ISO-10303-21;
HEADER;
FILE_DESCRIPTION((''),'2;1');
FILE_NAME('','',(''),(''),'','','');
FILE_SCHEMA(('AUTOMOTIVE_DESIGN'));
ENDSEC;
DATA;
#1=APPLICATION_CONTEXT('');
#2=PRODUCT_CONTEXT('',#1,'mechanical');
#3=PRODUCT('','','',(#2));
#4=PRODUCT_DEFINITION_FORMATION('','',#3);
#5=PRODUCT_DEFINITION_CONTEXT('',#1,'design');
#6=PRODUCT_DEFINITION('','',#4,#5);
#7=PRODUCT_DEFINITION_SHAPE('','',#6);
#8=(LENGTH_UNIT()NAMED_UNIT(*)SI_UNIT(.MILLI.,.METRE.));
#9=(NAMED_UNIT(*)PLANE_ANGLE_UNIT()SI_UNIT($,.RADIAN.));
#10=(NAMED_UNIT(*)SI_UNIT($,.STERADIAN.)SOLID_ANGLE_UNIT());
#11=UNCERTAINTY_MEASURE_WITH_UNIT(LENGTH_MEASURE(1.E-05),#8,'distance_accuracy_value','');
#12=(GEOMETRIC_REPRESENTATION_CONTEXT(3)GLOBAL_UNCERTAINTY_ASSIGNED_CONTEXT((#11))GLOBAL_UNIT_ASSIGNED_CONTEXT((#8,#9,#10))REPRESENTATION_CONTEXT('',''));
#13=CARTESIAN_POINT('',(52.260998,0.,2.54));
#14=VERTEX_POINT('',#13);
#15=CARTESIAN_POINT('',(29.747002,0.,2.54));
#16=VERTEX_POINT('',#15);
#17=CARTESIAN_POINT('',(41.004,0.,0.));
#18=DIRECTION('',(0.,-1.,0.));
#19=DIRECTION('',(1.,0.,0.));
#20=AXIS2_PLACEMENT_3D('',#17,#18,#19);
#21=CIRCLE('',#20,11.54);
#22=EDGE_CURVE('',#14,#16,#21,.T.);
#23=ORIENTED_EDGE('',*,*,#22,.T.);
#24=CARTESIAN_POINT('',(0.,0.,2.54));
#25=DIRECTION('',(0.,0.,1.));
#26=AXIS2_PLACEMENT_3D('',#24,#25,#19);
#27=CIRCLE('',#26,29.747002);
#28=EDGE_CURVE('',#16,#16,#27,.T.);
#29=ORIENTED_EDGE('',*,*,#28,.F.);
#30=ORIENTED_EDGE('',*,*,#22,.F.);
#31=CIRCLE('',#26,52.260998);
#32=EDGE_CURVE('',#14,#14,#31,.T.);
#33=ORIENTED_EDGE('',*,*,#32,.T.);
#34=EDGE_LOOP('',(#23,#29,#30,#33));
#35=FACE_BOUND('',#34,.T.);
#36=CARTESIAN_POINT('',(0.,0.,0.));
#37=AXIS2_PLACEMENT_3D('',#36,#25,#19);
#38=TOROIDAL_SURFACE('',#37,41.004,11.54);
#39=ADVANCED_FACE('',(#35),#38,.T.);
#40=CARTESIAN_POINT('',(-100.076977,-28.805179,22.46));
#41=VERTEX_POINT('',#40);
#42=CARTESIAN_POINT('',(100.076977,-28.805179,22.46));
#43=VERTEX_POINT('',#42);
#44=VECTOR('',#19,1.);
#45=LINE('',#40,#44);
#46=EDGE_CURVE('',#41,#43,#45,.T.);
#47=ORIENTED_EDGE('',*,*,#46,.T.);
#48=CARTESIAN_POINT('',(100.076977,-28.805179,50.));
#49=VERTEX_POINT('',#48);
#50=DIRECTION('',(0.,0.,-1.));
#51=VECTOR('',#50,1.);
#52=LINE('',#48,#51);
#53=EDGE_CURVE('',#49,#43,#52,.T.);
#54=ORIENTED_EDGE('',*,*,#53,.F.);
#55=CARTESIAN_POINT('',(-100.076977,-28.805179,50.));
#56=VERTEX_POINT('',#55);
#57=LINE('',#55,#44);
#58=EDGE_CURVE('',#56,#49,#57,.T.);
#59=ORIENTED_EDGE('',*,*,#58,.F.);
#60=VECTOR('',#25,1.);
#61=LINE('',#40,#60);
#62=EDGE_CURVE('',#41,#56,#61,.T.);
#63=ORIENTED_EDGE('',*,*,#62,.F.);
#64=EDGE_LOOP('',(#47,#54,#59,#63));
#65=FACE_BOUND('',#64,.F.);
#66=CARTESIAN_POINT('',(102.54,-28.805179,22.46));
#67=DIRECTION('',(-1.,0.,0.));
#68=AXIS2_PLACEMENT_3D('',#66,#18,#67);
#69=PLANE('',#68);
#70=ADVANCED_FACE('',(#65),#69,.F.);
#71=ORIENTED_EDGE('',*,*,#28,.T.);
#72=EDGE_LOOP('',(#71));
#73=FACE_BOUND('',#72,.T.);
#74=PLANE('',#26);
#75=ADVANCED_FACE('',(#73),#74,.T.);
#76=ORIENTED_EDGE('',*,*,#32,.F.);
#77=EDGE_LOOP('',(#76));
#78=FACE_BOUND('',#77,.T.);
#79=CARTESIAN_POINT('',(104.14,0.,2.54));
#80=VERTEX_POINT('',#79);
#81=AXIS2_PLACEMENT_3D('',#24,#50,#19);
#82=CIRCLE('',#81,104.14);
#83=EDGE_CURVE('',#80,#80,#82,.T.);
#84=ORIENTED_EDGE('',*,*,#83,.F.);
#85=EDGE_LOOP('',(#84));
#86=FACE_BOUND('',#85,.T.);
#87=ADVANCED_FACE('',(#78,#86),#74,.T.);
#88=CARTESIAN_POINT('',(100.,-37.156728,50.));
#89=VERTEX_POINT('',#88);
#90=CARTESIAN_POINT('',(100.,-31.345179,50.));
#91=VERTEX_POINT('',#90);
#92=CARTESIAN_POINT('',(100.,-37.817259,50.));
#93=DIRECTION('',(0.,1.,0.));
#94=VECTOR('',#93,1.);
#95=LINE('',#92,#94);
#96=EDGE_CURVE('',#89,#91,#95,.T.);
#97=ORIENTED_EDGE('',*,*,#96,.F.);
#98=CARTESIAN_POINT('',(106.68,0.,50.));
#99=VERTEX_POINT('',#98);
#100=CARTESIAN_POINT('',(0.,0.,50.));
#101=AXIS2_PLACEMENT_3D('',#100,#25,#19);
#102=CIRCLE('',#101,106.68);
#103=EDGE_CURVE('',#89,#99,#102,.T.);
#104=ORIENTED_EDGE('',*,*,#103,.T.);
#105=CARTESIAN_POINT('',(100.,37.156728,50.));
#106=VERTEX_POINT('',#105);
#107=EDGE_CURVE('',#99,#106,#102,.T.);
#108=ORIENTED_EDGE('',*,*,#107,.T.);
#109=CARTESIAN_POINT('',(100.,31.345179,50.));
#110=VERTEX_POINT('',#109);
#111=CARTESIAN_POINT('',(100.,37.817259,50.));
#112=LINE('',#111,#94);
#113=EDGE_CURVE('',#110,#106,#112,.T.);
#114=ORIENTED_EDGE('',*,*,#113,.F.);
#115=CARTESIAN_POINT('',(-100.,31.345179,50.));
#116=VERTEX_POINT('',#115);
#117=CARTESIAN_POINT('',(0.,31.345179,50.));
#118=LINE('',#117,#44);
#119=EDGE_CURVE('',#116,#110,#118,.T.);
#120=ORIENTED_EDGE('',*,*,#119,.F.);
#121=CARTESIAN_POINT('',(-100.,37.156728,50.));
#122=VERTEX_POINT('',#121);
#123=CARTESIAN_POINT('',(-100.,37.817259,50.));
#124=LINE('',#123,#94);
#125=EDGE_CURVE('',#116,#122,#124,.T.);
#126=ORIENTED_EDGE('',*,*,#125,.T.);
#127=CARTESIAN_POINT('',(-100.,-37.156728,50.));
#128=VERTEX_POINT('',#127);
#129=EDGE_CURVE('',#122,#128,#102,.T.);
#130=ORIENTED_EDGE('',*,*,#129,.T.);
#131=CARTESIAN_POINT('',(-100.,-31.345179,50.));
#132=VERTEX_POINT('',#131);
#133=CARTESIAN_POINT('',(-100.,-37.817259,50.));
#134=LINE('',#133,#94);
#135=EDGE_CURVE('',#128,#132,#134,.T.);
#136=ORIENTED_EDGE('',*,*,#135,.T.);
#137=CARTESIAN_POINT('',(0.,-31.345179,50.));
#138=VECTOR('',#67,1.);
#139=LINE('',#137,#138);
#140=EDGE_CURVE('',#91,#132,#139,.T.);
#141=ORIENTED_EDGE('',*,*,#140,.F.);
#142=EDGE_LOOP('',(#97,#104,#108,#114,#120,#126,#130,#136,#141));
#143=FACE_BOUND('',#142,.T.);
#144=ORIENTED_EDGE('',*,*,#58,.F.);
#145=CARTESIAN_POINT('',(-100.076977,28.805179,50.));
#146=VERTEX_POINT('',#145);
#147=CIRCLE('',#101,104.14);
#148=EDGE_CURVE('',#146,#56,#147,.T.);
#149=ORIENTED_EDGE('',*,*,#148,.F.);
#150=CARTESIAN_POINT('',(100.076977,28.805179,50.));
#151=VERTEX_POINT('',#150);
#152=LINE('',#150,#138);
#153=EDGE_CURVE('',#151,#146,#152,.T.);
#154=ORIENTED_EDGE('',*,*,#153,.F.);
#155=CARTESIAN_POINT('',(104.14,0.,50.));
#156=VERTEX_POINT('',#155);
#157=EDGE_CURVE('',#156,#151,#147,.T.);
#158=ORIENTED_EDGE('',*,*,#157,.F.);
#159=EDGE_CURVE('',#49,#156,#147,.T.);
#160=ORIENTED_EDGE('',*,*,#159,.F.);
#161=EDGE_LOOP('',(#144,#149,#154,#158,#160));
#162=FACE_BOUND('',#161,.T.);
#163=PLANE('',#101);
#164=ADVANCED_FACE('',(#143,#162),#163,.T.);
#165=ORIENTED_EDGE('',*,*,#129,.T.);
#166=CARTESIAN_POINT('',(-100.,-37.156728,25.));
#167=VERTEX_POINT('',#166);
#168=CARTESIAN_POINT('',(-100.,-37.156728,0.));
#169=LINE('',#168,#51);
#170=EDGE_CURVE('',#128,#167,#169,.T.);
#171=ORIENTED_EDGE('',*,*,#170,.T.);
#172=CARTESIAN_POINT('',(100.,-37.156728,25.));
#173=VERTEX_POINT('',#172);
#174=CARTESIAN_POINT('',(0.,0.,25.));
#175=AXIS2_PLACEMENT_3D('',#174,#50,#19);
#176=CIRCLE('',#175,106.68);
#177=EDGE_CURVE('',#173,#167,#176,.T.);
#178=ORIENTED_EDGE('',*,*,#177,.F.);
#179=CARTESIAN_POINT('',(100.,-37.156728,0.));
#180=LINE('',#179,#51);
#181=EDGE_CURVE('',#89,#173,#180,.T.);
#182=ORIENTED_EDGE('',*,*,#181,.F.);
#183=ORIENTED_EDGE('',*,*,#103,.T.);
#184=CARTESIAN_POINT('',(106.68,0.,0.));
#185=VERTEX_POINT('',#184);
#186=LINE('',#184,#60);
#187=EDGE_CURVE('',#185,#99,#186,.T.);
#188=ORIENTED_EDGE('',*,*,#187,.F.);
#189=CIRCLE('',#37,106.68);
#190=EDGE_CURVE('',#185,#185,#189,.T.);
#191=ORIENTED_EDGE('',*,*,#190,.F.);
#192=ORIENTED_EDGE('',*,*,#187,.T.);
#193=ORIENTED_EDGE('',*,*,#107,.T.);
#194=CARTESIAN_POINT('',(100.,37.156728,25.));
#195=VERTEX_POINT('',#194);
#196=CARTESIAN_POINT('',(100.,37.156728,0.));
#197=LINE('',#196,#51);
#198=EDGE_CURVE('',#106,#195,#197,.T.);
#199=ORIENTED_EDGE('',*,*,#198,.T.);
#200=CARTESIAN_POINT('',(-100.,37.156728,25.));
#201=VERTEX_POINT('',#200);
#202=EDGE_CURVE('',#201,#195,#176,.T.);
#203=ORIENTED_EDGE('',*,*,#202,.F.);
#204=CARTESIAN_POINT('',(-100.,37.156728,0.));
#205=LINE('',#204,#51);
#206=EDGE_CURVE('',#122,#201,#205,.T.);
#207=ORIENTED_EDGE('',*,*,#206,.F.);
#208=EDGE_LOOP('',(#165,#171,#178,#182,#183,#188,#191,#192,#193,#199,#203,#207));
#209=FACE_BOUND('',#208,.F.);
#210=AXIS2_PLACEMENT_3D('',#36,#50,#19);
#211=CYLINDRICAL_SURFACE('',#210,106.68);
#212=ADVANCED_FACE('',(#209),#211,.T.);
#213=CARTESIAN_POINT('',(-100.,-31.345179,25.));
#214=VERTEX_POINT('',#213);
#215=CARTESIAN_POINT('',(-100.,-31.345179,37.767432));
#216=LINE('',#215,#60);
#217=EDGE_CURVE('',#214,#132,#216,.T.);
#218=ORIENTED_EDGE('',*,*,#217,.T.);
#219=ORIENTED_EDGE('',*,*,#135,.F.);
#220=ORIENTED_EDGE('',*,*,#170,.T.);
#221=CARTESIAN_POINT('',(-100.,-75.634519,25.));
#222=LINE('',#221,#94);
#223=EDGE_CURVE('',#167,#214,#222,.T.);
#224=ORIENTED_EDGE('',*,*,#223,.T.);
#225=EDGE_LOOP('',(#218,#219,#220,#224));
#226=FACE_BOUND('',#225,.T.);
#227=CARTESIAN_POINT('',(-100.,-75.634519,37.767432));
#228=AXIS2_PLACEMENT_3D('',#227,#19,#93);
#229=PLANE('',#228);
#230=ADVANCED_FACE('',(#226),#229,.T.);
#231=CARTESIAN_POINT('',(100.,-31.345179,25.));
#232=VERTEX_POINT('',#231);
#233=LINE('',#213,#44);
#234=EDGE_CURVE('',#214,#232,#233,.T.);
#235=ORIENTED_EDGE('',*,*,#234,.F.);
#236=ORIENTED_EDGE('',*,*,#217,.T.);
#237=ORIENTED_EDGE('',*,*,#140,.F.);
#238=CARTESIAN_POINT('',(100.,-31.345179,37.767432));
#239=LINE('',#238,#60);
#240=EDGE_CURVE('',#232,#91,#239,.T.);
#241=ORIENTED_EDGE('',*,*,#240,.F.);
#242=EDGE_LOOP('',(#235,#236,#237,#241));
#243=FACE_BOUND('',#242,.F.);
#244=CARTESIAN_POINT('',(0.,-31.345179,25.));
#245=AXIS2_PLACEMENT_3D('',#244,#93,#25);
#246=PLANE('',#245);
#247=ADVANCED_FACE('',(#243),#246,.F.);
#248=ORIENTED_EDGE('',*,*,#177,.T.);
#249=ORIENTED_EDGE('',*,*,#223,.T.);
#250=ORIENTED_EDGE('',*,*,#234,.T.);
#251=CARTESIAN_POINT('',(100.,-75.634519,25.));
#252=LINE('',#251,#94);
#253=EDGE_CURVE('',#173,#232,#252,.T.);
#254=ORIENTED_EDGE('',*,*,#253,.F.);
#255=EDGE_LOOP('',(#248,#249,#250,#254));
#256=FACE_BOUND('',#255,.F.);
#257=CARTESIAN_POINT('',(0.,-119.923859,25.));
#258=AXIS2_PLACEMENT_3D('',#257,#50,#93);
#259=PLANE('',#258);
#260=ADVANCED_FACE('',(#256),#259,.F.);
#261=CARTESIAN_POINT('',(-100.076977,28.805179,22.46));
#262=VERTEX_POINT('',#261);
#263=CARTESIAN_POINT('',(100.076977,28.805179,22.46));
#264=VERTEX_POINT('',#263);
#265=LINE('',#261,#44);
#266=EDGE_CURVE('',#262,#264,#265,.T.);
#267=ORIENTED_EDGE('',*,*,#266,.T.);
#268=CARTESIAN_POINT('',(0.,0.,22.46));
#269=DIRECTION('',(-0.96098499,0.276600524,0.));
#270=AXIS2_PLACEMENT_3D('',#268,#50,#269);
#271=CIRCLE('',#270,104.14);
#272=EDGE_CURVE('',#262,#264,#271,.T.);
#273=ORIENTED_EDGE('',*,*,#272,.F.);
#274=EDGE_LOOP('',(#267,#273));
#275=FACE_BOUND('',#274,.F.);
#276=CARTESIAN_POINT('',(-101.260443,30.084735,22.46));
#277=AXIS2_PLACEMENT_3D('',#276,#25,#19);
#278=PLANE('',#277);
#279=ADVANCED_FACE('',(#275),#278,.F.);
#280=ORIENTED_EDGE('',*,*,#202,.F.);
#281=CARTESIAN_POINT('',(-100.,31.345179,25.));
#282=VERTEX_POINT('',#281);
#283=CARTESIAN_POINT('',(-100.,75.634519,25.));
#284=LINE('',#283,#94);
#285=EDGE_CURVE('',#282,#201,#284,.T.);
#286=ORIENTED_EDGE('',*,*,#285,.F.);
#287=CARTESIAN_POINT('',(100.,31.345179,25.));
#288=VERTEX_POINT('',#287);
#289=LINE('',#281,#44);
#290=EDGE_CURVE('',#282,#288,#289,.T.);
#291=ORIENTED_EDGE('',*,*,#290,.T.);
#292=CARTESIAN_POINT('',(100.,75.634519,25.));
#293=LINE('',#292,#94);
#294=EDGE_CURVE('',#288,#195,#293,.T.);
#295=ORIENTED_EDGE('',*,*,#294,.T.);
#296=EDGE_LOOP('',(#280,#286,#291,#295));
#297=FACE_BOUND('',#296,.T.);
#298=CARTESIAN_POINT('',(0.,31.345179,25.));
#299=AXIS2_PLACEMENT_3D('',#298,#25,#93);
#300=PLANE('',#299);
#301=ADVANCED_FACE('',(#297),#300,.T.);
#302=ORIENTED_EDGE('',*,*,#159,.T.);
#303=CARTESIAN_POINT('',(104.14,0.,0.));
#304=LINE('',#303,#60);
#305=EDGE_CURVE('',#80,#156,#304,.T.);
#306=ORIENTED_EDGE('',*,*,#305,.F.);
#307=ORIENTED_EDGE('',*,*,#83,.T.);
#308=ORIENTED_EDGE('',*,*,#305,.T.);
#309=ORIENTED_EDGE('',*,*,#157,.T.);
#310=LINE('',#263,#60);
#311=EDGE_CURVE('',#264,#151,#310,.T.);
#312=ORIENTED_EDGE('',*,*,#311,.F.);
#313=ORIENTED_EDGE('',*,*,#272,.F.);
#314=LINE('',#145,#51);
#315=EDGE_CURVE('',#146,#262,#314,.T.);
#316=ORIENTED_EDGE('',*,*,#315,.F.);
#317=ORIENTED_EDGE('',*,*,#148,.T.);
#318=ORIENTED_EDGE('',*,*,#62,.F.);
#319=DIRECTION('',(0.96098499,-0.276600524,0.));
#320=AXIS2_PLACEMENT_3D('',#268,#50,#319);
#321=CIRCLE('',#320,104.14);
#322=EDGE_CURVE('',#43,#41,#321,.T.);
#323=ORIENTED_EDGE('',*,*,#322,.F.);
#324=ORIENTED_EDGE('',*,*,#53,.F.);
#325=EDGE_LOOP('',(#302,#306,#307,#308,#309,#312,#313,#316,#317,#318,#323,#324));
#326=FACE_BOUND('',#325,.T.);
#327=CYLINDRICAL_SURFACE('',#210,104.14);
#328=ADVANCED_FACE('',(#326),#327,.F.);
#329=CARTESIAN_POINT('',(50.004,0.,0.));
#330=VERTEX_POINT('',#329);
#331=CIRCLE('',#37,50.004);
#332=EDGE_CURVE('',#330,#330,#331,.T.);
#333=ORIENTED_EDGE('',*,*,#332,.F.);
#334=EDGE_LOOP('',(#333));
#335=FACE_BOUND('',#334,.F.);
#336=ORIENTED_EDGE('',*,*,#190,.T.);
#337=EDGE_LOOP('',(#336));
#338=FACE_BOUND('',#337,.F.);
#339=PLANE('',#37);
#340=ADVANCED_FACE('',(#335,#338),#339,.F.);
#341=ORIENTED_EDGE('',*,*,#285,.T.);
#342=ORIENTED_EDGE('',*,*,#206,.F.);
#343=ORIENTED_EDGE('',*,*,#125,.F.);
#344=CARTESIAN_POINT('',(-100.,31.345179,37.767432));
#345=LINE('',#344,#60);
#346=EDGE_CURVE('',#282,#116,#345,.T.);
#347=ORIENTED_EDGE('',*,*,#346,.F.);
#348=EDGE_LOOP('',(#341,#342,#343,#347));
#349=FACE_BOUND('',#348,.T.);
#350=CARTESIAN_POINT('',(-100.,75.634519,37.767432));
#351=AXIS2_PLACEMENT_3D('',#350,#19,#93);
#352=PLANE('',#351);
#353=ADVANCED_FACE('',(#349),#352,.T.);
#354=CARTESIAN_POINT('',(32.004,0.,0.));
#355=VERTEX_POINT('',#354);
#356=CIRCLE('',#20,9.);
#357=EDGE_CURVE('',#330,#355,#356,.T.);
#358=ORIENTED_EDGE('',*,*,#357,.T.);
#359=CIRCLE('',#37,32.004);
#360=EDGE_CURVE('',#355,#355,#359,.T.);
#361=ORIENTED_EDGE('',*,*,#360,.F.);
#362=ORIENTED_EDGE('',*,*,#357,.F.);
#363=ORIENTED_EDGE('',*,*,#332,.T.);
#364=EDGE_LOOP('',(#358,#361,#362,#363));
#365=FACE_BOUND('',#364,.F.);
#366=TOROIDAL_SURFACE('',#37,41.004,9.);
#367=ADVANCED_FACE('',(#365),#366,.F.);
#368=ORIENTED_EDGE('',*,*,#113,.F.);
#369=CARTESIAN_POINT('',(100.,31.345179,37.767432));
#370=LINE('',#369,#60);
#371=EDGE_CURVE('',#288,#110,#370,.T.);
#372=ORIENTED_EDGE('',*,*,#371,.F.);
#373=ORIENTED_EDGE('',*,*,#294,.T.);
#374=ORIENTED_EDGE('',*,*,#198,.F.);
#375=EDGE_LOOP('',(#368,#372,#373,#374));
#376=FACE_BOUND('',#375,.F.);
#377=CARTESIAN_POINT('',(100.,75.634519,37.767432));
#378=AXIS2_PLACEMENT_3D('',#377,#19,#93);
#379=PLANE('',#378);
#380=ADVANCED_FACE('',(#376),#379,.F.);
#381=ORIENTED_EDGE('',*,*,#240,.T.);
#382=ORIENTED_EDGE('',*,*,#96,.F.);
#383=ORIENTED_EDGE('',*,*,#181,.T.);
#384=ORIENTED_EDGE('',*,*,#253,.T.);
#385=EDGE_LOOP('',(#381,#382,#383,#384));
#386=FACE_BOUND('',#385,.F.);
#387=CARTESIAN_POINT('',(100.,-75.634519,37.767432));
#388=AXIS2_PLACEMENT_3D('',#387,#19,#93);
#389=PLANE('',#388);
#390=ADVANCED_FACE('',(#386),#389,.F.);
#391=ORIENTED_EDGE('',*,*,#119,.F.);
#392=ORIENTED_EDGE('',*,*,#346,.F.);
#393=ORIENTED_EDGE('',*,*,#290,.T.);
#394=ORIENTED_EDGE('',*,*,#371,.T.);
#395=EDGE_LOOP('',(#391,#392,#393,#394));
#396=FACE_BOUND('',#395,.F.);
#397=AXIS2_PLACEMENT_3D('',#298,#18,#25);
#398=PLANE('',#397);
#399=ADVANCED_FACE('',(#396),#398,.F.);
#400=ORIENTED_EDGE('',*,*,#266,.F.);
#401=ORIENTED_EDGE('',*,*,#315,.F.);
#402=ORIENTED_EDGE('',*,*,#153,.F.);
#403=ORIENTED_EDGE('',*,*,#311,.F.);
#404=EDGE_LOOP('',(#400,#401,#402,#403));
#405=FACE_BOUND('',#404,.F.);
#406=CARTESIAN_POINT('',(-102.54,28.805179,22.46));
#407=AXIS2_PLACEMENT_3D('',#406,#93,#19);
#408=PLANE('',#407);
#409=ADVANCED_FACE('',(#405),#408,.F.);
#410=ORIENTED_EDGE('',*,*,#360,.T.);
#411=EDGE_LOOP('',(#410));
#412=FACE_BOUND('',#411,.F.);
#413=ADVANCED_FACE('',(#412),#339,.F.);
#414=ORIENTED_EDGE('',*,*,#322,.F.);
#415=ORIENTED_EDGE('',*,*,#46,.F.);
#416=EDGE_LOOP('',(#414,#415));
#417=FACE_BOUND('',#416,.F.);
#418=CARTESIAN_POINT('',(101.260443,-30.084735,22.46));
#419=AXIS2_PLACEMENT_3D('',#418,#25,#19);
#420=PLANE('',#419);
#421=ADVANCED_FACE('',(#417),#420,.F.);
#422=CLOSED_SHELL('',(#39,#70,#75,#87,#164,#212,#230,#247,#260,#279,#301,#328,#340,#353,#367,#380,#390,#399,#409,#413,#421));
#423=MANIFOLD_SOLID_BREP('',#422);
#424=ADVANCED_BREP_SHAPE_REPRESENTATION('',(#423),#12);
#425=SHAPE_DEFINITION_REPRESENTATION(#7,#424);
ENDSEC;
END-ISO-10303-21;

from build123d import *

# Parameters (mm, degrees)
F0_R        = 106.68
F1_DEPTH    = 50
F2_R        = 9
F4_W        = 88.5786805532
F4_H        = 25.534863025
F5_DEPTH    = 100
F6_T        = 2.54
F6_T3_DEPTH = 30.08
F6_T5_DEPTH = 10.8915489546
F6_T7_DEPTH = 205.08
F6_T9_DEPTH = 10.8915489546


# Not quite as in the source:
# - a shell that OpenCascade refuses in one call is made with other operations: the cavity is built on its own and cut out


with BuildPart() as f1:
    # F0 (on Top) → F1 (new body)
    with BuildSketch(Plane.XY):
        Circle(F0_R)
    extrude(amount=F1_DEPTH)

    # F2 (on Front) → F3 (revolve, cut)
    with BuildSketch(Plane.XZ):
        with Locations((41.004, 0)):
            Circle(F2_R)
    revolve(axis=Axis((0, 0, 20.5781124532), (0, 0, 1)), mode=Mode.SUBTRACT)

    # F4 (on Right) → F5 (cut, symmetric)
    with BuildSketch(Plane.YZ):
        with Locations((75.6345188421, 37.7674315125)):
            Rectangle(F4_W, F4_H)
        with Locations((-75.6345188421, 37.7674315125)):
            Rectangle(F4_W, F4_H)
    extrude(amount=F5_DEPTH, both=True, mode=Mode.SUBTRACT)

    # F6: shell of thickness 2.54, made by hand


with BuildPart() as f6_core1:
    # F6_t2: copy of F1
    add(f1.part)

    # the walls: a layer under each face that stays
    f6_faces = [f6_core1.faces().sort_by_distance(p)[0] for p in [
        (-106.68, 0, 25),
        (-71.12, -71.12, 0),
        (100, -34.2509530428, 37.5),
        (0, -69.0125892827, 25),
        (-100, -34.2509530428, 37.5),
        (-100, 34.2509530428, 37.5),
        (0, 69.0125892827, 25),
        (100, 34.2509530428, 37.5),
        (-41.004, 0, 9),
        (0, -31.3451785655, 37.5),
        (0, 31.3451785655, 37.5),
        (0, 0, 0),
    ]]
    thicken(f6_faces, amount=-F6_T, mode=Mode.SUBTRACT)

    # F6_s4 → F6_t3 (cut)
    with BuildSketch(Plane.XY.offset(22.46)):
        Polygon((99.9746, -31.3705785655), (102.54, -31.3451785655), (102.54, -28.8051785655), (100, -28.8051785655), align=None)
        Polygon((-99.9746, -31.3705785655), (-102.54, -31.3451785655), (-102.54, -28.8051785655), (-100, -28.8051785655), align=None)
        Polygon((-99.9746, 31.3705785655), (-102.54, 31.3451785655), (-102.54, 28.8051785655), (-100, 28.8051785655), align=None)
        Polygon((99.9746, 31.3705785655), (102.54, 31.3451785655), (102.54, 28.8051785655), (100, 28.8051785655), align=None)
    extrude(amount=F6_T3_DEPTH, mode=Mode.SUBTRACT)

    # F6_s6 → F6_t5 (cut)
    with BuildSketch(Plane.XZ.offset(28.8051785655)):
        Polygon((99.9746, 25.0254), (102.54, 25), (102.54, 22.46), (100, 22.46), align=None)
        Polygon((-99.9746, 25.0254), (-100, 22.46), (-102.54, 22.46), (-102.54, 25), align=None)
    extrude(amount=F6_T5_DEPTH, mode=Mode.SUBTRACT)

    # F6_s8 → F6_t7 (cut)
    with BuildSketch(Plane.YZ.offset(-102.54)):
        Polygon((-31.3705785655, 25.0254), (-31.3451785655, 22.46), (-28.8051785655, 22.46), (-28.8051785655, 25), align=None)
        Polygon((31.3705785655, 25.0254), (31.3451785655, 22.46), (28.8051785655, 22.46), (28.8051785655, 25), align=None)
    extrude(amount=F6_T7_DEPTH, mode=Mode.SUBTRACT)

    # F6_s10 → F6_t9 (cut)
    with BuildSketch(Plane.XZ.offset(-39.6967275201)):
        Polygon((-99.9746, 25.0254), (-102.54, 25), (-102.54, 22.46), (-100, 22.46), align=None)
        Polygon((99.9746, 25.0254), (100, 22.46), (102.54, 22.46), (102.54, 25), align=None)
    extrude(amount=F6_T9_DEPTH, mode=Mode.SUBTRACT)


with BuildPart() as f1_1:
    add(f1.part)

    # what is left inside the walls is the cavity
    f6_cavity = [f6_core1.part.solids().sort_by_distance(p)[0] for p in [
        (-52.07, 34.713333, 2.5654),
    ]]
    add(f6_cavity, mode=Mode.SUBTRACT)


solid = f1_1.part
